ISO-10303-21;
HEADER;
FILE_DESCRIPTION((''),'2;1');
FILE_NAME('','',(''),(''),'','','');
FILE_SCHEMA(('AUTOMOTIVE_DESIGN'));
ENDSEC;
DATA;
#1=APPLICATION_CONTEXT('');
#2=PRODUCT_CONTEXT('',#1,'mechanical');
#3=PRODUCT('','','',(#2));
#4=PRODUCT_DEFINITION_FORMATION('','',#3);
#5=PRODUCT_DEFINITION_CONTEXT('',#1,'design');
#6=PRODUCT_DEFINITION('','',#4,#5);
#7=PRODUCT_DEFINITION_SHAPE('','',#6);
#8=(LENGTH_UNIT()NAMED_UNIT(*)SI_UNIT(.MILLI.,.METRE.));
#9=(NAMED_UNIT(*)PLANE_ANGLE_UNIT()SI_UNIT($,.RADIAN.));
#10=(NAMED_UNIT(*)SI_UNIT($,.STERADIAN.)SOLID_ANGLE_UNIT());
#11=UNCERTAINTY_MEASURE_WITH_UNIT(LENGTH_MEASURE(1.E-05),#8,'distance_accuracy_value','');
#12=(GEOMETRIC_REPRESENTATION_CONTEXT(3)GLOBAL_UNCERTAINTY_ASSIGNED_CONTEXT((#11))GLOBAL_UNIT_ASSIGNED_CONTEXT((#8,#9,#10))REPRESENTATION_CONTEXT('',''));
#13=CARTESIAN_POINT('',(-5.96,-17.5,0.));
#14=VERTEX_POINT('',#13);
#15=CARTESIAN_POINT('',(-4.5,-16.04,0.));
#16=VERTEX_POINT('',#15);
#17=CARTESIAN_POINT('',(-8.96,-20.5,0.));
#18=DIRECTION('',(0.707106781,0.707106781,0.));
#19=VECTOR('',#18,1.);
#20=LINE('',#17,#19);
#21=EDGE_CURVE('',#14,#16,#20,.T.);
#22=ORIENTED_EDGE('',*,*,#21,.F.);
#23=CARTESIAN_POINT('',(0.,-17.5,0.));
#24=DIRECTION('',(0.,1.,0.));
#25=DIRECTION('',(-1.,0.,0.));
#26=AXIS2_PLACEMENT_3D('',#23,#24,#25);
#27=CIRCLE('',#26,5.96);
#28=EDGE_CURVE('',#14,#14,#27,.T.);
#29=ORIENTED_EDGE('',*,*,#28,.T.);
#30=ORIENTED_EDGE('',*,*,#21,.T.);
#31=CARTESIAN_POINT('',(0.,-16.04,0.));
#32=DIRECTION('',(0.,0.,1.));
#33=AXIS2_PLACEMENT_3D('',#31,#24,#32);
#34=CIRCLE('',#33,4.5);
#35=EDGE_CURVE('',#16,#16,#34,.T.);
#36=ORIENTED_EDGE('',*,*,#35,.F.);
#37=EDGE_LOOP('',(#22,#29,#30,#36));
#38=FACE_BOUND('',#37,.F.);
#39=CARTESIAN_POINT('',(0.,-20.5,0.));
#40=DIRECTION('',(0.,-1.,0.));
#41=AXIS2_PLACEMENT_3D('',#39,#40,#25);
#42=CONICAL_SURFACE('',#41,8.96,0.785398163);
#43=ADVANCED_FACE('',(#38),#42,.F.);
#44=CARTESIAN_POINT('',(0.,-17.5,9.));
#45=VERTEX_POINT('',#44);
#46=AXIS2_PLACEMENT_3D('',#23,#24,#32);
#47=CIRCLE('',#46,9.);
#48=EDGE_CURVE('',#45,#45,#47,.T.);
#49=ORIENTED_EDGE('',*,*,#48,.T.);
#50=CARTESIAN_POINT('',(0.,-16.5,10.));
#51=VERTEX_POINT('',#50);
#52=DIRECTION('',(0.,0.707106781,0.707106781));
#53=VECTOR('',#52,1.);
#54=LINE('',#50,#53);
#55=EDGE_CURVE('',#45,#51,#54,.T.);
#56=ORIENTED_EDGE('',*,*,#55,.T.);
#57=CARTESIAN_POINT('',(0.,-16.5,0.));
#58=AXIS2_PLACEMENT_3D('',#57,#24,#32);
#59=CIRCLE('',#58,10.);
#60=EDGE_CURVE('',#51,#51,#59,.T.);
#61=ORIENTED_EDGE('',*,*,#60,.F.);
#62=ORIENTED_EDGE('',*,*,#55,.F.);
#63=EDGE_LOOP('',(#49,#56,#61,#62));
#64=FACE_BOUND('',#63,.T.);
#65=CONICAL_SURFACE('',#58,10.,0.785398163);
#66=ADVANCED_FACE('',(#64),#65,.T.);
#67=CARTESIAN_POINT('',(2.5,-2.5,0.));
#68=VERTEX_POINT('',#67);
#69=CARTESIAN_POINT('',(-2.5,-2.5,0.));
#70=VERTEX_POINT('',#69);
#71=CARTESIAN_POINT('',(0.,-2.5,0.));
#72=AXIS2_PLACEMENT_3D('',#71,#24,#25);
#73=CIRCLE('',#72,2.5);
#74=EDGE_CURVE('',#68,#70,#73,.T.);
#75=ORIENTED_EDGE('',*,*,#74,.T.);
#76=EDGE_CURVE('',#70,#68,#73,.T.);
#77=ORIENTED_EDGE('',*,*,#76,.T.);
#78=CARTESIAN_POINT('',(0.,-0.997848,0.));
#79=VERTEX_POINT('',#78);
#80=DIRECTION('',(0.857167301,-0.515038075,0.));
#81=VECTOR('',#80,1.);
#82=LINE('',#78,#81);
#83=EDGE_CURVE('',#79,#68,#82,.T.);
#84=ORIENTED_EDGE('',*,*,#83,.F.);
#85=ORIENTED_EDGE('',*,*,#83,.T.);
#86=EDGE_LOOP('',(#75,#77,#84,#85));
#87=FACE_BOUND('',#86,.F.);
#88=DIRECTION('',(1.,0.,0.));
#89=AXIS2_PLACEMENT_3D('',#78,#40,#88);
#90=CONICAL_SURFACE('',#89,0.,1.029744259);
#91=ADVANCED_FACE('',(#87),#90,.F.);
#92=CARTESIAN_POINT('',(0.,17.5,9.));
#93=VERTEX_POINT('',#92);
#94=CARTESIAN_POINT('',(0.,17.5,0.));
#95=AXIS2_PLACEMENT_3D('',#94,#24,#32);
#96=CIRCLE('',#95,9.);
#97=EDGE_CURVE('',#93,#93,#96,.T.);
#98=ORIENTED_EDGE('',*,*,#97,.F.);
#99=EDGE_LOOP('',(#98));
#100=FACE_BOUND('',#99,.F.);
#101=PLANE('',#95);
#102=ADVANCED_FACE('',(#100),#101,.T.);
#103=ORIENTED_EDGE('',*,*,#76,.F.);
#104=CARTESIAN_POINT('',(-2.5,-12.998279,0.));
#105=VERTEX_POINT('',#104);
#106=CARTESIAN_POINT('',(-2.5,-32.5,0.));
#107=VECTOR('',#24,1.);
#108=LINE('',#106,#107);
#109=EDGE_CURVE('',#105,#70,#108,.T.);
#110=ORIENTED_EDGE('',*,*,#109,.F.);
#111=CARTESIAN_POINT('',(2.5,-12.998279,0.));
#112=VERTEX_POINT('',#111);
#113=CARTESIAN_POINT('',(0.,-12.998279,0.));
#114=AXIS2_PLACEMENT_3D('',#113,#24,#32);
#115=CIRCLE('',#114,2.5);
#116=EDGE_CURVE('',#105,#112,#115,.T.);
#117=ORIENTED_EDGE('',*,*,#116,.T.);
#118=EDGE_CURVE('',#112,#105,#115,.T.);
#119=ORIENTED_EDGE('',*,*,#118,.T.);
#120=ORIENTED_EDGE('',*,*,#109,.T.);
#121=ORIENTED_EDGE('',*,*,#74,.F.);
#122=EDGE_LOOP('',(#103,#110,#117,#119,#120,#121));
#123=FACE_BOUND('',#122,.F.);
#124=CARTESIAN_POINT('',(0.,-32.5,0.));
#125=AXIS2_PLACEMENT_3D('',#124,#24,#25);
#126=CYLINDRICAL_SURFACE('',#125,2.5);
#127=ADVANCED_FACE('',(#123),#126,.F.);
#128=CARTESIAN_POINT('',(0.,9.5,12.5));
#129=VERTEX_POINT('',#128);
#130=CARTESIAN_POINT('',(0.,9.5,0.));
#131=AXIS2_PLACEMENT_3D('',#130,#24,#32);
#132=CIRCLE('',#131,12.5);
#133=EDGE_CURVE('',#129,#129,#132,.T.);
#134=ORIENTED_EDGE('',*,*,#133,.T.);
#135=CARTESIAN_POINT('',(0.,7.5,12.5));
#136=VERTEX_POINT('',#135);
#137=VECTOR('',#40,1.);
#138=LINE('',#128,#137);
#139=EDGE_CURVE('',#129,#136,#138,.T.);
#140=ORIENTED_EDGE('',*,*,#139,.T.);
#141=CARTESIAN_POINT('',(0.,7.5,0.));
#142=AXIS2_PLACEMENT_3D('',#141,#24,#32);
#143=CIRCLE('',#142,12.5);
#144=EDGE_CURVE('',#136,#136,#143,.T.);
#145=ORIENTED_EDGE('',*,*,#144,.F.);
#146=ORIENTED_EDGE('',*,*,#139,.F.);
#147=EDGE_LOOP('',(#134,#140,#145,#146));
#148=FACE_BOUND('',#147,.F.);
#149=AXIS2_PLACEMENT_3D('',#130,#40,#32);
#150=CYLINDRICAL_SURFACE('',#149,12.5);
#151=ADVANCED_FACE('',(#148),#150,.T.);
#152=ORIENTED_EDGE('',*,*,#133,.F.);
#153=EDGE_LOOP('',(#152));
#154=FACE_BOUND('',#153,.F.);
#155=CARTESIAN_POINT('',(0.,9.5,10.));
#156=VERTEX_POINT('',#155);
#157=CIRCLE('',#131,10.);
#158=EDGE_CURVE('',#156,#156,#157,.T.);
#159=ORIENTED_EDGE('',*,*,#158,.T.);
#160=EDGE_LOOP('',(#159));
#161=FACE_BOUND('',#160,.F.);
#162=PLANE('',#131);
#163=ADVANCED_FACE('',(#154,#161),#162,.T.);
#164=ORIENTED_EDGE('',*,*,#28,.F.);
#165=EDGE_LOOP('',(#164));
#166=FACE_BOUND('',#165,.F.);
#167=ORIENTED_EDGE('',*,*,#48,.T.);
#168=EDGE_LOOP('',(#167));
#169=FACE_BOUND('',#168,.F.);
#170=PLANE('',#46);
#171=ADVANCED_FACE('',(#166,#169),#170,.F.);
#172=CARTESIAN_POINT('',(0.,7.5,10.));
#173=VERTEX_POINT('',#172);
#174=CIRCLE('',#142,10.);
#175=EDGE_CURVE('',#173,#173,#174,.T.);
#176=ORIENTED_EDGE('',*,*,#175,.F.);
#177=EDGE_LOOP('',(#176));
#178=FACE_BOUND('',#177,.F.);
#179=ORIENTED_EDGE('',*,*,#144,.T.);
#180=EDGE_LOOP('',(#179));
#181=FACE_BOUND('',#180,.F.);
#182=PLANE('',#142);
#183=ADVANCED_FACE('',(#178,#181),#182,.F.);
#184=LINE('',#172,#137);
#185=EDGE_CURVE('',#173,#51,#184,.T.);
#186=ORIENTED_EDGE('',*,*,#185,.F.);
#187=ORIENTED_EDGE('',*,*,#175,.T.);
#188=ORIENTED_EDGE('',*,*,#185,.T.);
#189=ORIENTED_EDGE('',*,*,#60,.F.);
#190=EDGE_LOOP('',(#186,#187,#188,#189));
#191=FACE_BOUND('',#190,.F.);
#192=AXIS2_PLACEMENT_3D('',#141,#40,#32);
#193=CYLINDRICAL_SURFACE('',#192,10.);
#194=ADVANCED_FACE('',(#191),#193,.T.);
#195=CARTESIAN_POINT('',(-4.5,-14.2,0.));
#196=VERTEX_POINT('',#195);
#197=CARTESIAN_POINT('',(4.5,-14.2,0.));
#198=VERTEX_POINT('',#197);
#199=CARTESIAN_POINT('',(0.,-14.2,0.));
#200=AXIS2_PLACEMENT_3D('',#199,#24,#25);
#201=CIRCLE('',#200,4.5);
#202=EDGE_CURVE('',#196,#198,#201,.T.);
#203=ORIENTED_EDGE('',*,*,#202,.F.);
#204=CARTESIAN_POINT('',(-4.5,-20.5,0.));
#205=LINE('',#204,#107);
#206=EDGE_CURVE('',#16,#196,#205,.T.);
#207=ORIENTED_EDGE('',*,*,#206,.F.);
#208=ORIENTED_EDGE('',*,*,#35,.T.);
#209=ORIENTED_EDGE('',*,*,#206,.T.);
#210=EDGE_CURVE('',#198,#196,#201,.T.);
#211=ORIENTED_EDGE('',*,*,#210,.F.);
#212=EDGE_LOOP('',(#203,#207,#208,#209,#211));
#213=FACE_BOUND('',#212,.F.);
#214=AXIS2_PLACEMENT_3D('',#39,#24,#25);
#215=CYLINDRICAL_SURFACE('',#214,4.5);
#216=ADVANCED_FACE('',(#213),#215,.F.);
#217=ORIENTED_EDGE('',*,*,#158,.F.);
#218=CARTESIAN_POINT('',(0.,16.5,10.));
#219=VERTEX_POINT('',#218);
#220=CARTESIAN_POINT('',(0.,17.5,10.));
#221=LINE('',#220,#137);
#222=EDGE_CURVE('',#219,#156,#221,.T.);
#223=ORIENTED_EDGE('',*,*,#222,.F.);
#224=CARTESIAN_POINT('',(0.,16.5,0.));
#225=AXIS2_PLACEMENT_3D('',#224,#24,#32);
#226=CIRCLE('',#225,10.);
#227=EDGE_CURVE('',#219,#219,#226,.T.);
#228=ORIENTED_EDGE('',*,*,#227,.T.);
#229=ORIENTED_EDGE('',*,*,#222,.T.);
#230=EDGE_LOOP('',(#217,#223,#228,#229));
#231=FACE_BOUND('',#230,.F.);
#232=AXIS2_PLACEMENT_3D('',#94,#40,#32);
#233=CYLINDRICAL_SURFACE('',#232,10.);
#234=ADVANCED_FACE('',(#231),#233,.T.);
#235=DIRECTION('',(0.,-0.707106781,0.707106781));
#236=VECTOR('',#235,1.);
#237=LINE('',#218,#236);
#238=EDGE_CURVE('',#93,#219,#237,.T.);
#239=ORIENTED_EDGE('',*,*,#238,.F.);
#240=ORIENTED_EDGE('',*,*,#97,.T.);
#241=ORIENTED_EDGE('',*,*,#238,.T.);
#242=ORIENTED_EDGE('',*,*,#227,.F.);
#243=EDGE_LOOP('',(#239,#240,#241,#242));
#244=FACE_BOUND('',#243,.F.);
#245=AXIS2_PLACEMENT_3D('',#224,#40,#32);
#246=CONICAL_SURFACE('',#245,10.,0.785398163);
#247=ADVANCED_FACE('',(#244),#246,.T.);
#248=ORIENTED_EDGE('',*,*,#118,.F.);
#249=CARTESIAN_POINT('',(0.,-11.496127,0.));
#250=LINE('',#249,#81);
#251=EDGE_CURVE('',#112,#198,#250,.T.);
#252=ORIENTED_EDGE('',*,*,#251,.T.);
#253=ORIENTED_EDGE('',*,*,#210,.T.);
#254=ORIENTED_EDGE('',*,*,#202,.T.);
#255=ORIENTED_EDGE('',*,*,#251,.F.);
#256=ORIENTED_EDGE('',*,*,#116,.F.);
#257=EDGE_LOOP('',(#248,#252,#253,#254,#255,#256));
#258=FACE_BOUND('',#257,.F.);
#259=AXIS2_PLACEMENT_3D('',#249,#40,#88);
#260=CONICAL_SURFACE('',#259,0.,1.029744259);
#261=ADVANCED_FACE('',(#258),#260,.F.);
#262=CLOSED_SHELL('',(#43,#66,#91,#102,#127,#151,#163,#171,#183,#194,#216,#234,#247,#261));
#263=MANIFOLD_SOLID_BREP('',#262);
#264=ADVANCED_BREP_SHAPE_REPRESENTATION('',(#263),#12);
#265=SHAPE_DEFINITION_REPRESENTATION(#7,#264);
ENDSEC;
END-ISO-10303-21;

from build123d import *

# Parameters (mm, degrees)
F2_SIZE        = 1
F4_D           = 5
F4_DEPTH       = 15
F4_TIP         = 1.5021515476
F7_D           = 9
F7_DEPTH       = 6.3
F7_CSINK_D     = 17.92
F7_CSINK_ANGLE = 90
F7_TIP         = 2.7038727856


with BuildPart() as f1:
    # F0 (on Right) → F1 (revolve)
    with BuildSketch(Plane.YZ):
        Polygon((-17.5, 10), (-17.5, 0), (17.5, 0), (17.5, 10), (9.5, 10), (9.5, 12.5), (7.5, 12.5), (7.5, 10), align=None)
    revolve(axis=Axis((0, 0, 0), (0, 1, 0)))

    # F2
    f2_edges = [f1.edges().sort_by_distance(p)[0] for p in [
        (0, 17.5, -10),
        (0, -17.5, -10),
    ]]
    chamfer(f2_edges, length=F2_SIZE)

    # F4
    with Locations(Plane.XZ.offset(17.5)):
        with Locations((0, 0)):
            Hole(F4_D / 2, depth=F4_DEPTH)
            with Locations((0, 0, -(F4_DEPTH + F4_TIP / 2))):  # 118° drill point
                Cone(0, F4_D / 2, F4_TIP, mode=Mode.SUBTRACT)

    # F7
    with Locations(Plane.XZ.offset(20.5)):
        with Locations((0, 0)):
            CounterSinkHole(F7_D / 2, F7_CSINK_D / 2, depth=F7_DEPTH, counter_sink_angle=F7_CSINK_ANGLE)
            with Locations((0, 0, -(F7_DEPTH + F7_TIP / 2))):  # 118° drill point
                Cone(0, F7_D / 2, F7_TIP, mode=Mode.SUBTRACT)


solid = f1.part
